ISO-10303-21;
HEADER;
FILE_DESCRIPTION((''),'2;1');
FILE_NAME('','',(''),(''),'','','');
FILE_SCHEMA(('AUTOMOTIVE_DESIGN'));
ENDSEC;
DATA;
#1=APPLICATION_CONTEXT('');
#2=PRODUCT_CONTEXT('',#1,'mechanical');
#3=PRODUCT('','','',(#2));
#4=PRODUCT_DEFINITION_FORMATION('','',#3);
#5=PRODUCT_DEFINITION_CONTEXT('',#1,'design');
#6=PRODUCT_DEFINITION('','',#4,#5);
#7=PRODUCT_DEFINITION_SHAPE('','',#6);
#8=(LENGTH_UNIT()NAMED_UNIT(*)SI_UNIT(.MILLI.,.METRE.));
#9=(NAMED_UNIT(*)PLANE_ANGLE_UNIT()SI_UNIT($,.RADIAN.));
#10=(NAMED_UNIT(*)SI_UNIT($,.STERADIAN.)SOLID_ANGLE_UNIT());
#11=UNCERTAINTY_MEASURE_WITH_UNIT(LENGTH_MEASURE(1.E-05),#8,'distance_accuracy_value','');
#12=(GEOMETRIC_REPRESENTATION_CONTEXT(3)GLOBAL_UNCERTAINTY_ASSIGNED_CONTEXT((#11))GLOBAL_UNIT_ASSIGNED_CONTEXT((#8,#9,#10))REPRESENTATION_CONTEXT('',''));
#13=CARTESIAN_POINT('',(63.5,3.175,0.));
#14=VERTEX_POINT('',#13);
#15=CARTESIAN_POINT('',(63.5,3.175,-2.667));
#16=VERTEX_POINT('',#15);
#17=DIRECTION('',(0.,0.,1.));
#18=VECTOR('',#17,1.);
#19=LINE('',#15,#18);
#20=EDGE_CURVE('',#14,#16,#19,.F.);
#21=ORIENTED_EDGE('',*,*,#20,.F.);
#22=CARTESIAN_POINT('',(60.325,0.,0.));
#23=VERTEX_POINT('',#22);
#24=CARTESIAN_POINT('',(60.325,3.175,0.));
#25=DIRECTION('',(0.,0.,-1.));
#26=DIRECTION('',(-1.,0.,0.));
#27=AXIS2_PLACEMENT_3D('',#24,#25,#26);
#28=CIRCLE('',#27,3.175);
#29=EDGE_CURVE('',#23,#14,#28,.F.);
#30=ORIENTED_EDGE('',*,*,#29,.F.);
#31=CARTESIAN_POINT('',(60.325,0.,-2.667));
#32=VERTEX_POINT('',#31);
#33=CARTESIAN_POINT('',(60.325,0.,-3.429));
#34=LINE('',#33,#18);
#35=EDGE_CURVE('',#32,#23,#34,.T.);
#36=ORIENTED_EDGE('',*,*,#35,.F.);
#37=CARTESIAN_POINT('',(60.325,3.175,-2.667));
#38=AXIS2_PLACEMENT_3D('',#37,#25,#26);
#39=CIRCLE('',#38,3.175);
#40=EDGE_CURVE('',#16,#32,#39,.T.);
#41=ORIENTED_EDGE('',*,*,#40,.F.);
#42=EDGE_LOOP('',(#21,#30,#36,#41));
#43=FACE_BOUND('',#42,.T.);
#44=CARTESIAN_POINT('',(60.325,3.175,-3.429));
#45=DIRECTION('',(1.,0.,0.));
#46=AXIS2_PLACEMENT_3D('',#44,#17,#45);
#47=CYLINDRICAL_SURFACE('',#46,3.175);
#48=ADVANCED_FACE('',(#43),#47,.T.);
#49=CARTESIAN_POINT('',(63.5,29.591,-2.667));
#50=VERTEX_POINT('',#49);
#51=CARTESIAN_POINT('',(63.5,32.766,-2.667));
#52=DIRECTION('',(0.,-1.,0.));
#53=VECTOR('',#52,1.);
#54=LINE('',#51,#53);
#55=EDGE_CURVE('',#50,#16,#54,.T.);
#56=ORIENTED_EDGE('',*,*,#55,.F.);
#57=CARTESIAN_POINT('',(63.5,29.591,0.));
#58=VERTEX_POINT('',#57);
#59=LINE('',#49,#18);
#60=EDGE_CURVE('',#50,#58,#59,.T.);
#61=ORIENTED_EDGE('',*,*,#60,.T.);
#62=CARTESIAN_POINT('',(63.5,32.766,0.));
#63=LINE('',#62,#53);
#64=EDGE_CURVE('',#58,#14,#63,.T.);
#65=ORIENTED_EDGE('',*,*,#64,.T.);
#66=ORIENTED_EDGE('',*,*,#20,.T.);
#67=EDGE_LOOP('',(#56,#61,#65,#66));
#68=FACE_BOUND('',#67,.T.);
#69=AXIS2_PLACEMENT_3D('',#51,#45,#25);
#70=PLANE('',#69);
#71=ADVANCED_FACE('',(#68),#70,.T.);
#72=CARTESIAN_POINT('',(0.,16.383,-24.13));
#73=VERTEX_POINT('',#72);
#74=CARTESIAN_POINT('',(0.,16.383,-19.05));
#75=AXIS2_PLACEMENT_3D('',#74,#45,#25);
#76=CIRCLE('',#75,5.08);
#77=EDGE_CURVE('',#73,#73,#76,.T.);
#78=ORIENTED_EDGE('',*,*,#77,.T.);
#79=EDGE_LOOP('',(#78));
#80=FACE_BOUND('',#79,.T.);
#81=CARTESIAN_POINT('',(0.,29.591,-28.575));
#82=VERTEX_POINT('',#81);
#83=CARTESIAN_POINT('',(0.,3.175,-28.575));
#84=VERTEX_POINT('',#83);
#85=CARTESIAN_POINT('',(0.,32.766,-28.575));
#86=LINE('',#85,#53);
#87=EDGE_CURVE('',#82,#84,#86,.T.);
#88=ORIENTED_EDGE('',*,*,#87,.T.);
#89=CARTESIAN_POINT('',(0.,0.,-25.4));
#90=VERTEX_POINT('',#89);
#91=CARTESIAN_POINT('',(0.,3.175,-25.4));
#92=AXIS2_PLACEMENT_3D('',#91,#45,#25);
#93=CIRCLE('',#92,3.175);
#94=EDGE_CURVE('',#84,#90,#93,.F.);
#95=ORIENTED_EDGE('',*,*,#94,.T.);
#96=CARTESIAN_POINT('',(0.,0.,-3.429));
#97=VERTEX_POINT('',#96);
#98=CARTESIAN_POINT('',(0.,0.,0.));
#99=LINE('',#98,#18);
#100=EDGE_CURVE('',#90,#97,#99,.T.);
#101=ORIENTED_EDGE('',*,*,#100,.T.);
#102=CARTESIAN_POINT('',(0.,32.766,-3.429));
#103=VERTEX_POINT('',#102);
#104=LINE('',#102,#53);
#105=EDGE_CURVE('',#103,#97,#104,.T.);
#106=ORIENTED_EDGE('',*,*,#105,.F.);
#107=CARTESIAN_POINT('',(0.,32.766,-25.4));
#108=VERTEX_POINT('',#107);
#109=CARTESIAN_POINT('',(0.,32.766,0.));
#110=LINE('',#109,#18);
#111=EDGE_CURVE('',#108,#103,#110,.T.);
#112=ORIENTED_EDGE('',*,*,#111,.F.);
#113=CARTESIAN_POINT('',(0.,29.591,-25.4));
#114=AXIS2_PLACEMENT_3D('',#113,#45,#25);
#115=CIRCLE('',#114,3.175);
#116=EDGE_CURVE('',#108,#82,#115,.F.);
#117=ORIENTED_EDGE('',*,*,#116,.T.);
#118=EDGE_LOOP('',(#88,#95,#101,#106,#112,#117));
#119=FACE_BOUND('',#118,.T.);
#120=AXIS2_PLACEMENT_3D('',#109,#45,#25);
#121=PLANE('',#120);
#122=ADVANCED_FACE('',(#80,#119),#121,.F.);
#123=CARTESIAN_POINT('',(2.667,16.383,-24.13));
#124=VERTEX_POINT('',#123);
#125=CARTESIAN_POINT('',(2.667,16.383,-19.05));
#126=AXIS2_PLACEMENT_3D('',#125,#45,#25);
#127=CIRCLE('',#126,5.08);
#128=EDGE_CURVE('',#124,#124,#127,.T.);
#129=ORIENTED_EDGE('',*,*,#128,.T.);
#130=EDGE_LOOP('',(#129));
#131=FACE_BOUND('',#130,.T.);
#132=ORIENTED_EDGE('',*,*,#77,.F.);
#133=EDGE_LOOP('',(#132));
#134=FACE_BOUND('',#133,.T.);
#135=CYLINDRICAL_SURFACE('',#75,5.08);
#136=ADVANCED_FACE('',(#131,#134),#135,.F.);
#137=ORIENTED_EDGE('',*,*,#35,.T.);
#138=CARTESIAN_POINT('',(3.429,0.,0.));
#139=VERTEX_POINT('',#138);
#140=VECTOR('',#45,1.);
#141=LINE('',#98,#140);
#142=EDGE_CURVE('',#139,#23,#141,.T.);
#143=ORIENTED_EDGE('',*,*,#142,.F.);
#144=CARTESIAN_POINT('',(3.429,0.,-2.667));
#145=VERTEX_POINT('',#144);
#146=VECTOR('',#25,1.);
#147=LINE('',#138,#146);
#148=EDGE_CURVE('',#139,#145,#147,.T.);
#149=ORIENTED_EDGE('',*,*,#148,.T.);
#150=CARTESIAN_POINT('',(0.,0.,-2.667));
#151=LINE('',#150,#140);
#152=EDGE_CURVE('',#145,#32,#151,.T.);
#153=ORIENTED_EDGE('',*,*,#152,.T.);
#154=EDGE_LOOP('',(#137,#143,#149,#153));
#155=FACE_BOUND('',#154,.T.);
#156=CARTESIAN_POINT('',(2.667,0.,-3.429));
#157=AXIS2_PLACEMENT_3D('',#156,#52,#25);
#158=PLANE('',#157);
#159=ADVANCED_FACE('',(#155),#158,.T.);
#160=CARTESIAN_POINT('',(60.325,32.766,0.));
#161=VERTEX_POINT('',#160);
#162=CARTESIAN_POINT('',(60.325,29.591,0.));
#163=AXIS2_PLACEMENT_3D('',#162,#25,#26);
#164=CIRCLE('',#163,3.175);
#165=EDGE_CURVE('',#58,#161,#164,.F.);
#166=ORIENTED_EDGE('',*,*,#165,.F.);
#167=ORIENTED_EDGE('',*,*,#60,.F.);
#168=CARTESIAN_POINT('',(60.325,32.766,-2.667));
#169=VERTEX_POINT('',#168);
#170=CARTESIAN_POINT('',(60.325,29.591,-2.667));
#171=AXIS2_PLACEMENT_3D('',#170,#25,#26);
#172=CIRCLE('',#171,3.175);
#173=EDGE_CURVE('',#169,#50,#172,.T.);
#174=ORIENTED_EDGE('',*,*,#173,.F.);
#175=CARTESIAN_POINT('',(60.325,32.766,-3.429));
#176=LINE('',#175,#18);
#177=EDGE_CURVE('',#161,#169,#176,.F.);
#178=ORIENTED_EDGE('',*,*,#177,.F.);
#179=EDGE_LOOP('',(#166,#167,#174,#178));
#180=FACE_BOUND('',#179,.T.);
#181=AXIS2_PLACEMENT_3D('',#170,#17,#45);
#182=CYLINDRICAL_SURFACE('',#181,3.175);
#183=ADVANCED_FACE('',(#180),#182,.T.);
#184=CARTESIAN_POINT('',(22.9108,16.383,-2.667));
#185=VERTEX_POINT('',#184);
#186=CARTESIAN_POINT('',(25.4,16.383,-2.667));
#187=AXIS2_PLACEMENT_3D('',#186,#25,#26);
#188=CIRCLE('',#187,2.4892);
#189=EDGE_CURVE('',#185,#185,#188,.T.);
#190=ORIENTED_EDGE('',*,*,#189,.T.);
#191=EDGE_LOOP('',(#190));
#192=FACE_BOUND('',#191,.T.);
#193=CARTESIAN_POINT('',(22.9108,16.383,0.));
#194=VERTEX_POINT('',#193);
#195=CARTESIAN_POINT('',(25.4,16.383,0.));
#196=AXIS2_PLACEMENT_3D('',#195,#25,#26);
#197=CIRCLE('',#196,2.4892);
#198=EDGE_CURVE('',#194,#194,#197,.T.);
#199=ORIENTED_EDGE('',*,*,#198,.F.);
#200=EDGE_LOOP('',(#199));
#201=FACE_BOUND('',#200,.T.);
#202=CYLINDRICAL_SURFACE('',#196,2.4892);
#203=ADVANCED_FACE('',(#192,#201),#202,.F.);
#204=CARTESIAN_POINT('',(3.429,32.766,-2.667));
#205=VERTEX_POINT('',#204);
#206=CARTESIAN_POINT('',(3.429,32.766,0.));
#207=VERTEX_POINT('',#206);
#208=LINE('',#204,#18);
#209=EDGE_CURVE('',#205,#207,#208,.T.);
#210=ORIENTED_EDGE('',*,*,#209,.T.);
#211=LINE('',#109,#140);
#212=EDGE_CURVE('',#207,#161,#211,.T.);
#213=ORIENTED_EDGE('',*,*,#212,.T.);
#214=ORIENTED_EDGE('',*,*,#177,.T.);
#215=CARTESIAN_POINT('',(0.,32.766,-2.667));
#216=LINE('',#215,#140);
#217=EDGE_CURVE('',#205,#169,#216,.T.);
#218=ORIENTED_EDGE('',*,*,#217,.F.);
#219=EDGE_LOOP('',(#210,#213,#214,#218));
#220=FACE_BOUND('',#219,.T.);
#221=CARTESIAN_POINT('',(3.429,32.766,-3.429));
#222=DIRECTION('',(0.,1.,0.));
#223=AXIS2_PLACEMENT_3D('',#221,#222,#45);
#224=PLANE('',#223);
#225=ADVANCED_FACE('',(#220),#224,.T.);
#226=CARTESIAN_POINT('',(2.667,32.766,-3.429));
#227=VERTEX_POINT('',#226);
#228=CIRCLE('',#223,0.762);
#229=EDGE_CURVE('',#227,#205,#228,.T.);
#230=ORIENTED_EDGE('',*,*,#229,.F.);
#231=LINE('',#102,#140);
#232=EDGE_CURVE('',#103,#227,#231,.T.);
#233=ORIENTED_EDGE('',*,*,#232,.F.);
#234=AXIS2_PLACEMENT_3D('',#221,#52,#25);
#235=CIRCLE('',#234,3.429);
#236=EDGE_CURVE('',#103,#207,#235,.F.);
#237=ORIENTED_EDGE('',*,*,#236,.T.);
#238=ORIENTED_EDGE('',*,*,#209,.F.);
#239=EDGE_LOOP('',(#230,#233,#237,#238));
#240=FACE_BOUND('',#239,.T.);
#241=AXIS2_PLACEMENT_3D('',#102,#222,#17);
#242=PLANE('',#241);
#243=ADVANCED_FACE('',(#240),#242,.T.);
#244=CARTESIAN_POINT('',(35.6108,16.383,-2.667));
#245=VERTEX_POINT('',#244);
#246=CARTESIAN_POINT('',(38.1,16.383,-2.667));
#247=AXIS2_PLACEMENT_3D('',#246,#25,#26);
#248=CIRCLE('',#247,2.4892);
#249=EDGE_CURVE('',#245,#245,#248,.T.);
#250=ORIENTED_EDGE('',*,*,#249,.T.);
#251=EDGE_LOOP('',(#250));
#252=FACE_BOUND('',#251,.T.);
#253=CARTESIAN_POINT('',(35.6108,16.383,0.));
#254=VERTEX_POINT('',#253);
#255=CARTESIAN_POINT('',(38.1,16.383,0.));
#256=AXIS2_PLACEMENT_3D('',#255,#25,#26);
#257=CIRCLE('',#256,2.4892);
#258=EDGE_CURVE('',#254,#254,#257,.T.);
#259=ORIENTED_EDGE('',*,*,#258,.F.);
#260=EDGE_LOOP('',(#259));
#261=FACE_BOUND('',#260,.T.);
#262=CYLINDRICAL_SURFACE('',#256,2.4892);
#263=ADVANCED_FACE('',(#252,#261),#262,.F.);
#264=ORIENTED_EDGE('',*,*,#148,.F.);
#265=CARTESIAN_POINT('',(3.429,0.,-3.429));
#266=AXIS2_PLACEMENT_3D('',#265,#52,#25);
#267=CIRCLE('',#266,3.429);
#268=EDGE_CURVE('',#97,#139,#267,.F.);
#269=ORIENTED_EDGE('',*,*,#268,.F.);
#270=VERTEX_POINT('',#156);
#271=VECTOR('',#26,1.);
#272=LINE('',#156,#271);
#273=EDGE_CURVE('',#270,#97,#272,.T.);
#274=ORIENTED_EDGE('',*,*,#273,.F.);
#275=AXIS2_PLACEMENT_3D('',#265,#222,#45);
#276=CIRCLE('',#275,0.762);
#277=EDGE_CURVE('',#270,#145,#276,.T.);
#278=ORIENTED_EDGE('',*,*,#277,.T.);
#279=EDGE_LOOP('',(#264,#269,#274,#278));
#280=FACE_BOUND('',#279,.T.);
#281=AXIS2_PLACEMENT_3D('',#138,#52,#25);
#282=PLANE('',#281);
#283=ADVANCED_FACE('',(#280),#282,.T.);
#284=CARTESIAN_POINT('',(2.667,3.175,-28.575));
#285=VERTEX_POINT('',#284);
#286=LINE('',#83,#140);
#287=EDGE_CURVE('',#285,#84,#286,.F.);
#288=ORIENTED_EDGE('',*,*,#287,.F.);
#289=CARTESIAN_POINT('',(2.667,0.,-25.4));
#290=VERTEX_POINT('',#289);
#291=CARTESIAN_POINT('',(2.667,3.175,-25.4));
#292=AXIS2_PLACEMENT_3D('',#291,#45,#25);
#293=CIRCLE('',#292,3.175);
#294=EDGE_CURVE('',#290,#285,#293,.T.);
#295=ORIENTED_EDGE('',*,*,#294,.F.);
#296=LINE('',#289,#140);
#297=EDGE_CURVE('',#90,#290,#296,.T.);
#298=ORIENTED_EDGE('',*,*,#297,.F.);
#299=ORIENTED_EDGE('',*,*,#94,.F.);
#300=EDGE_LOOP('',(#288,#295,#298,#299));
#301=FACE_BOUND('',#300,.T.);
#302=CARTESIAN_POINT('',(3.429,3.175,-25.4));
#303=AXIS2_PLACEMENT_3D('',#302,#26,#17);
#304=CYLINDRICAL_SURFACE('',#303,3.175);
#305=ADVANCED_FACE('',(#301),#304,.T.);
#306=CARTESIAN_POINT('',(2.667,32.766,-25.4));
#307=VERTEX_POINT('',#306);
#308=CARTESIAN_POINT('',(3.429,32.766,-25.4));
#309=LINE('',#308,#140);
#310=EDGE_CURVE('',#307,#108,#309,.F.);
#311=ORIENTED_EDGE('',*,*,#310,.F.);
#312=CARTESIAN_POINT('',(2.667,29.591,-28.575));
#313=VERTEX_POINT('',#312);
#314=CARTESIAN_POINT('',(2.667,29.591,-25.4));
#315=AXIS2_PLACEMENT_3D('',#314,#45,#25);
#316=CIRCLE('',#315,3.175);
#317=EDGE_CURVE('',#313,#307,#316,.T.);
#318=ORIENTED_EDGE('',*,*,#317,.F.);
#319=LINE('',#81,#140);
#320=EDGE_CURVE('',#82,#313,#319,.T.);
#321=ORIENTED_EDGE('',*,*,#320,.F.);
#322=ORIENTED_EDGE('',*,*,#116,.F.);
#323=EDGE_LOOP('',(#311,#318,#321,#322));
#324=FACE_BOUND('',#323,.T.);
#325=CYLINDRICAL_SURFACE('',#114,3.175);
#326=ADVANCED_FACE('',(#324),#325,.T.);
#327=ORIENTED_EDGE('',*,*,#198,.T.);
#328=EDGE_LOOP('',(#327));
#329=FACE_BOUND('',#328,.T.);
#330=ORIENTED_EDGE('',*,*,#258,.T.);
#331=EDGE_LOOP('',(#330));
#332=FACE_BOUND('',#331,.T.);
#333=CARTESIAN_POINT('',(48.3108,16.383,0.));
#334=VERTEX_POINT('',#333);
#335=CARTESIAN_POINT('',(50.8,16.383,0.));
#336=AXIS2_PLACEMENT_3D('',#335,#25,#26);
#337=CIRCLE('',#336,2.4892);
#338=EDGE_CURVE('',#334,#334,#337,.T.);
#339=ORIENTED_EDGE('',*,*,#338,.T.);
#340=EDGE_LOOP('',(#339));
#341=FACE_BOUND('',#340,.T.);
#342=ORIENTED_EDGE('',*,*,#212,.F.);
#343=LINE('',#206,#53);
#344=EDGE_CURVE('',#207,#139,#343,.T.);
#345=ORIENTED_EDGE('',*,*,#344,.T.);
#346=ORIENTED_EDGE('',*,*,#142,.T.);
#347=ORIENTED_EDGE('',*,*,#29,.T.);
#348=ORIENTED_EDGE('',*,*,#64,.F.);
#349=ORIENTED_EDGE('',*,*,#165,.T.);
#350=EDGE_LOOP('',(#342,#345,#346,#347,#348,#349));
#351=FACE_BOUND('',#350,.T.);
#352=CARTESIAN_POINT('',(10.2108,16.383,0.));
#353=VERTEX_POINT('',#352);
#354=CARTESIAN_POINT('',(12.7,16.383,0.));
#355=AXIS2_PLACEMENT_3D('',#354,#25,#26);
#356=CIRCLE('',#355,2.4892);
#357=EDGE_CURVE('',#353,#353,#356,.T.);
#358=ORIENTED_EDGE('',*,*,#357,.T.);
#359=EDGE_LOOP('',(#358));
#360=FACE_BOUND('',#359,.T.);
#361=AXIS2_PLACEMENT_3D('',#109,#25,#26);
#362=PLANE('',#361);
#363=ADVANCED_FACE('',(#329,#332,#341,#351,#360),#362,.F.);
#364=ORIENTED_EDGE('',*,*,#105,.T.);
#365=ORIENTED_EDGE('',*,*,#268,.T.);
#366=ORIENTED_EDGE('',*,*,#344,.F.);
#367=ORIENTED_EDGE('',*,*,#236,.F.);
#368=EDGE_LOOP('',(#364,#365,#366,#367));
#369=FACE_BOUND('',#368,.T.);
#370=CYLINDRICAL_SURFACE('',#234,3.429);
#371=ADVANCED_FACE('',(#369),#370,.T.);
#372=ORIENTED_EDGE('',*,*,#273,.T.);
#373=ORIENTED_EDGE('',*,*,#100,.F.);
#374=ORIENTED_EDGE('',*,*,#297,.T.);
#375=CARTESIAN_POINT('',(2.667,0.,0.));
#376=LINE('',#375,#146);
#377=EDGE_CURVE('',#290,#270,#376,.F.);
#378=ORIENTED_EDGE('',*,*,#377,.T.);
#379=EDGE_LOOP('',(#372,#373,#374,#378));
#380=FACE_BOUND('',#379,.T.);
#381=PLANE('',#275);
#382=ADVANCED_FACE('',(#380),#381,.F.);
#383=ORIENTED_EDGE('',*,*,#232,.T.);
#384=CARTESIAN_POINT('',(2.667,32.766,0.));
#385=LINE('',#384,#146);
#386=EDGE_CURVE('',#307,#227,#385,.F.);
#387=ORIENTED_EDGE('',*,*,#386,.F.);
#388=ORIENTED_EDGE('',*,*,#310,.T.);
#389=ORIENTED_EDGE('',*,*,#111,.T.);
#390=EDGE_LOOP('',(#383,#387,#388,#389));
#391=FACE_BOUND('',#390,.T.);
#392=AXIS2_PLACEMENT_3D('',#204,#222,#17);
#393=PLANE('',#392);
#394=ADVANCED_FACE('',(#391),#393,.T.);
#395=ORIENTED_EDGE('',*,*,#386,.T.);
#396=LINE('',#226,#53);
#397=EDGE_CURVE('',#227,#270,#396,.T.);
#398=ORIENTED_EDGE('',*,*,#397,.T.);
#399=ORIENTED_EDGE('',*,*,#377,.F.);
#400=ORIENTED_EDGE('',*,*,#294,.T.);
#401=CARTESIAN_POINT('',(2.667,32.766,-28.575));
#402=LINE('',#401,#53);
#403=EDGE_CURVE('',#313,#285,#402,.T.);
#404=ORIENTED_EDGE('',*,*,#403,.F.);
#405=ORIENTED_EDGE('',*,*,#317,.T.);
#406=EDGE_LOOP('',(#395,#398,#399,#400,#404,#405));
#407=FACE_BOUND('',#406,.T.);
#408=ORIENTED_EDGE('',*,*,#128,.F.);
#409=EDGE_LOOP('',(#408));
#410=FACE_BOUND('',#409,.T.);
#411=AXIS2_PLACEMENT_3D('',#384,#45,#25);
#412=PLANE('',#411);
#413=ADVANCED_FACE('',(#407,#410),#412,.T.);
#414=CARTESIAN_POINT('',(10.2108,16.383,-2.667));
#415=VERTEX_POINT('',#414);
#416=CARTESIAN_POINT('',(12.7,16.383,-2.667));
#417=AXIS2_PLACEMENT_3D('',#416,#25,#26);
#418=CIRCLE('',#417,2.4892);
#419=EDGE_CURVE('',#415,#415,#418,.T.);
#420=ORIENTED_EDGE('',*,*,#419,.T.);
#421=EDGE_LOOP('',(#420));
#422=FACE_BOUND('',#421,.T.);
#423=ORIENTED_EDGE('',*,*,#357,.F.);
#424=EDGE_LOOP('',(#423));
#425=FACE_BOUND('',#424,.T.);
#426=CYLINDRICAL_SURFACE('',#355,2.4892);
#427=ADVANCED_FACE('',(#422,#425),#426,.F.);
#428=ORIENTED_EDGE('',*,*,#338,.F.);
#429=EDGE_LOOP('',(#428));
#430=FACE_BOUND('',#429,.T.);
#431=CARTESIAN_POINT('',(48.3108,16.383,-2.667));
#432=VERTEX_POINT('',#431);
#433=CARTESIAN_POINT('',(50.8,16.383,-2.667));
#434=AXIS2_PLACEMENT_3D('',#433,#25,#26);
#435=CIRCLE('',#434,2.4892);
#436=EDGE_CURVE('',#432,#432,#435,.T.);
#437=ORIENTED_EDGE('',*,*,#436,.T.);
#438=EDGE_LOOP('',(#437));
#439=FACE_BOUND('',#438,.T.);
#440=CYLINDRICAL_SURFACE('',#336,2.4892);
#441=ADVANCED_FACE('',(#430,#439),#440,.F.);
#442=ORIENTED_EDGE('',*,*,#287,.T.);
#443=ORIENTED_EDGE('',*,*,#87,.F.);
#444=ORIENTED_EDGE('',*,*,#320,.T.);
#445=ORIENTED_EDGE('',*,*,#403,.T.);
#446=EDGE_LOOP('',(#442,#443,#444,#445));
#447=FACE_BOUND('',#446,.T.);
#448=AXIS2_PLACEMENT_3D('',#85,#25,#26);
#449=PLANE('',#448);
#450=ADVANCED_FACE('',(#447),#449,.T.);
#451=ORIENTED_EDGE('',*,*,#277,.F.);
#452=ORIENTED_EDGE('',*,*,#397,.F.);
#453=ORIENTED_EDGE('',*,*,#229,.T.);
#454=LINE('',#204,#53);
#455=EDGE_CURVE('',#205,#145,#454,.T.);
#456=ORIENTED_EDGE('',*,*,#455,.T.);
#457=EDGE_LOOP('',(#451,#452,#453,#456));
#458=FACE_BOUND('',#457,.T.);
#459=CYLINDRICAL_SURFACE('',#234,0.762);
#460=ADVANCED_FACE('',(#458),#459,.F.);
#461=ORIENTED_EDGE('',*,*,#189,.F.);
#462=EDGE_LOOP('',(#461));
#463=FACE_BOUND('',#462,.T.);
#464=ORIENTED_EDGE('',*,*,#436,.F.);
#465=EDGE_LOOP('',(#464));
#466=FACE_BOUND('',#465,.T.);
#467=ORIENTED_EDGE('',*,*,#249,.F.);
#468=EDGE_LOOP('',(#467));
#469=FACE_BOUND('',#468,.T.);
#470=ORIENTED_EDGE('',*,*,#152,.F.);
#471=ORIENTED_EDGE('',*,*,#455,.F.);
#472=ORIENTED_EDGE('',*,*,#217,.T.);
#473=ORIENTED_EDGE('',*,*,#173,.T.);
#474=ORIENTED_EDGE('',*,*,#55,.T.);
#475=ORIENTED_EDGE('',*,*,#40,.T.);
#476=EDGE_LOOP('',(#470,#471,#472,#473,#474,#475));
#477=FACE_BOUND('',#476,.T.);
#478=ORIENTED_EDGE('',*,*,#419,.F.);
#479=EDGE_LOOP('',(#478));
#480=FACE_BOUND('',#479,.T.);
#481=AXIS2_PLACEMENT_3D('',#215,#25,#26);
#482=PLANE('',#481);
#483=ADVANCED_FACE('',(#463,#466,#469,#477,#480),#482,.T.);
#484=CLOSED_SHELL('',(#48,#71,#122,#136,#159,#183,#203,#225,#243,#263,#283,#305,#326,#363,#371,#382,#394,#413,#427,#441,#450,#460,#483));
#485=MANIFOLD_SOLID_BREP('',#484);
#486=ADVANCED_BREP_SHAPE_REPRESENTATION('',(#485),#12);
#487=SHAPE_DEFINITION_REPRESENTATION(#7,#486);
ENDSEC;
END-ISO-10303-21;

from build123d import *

# Parameters (mm, degrees)
BASE_FLANGE1_DEPTH = 32.766
SKETCH6_R          = 2.4892
CUT_EXTRUDE1_DEPTH = 77.00713927
SKETCH7_R          = 5.08
CUT_EXTRUDE2_DEPTH = 75.771620753
FILLET1_R          = 3.175


# Read off the part's stored shape, not the designer's step: Base-Flange1
with BuildPart() as part:
    # Base-Flange1 outline → Base-Flange1 (new body)
    with BuildSketch(Plane(origin=(0, 0, 0), x_dir=(1, 0, 0), z_dir=(0, 1, 0))):
        with BuildLine():
            Line((3.429, 0), (63.5, 0))
            Line((63.5, 0), (63.5, 2.667))
            Line((63.5, 2.667), (3.429, 2.667))
            ThreePointArc((3.429, 2.667), (2.890184633, 2.890184633), (2.667, 3.429))
            Line((2.667, 3.429), (2.667, 28.575))
            Line((2.667, 28.575), (0, 28.575))
            Line((0, 28.575), (0, 3.429))
            ThreePointArc((0, 3.429), (1.004330847, 1.004330847), (3.429, 0))
        make_face()
    extrude(amount=BASE_FLANGE1_DEPTH)

    # Sketch6 → Cut-Extrude1 (cut, through all)
    with BuildSketch(Plane(origin=(0, 0, -2.667), x_dir=(-1, 0, 0), z_dir=(0, 0, -1))):
        with Locations((-50.8, 16.383)):
            Circle(SKETCH6_R)
        with Locations((-38.1, 16.383)):
            Circle(SKETCH6_R)
        with Locations((-25.4, 16.383)):
            Circle(SKETCH6_R)
        with Locations((-12.7, 16.383)):
            Circle(SKETCH6_R)
    extrude(amount=-CUT_EXTRUDE1_DEPTH, mode=Mode.SUBTRACT)

    # Sketch7 → Cut-Extrude2 (cut, through all)
    with BuildSketch(Plane(origin=(2.667, 0, 0), x_dir=(0, 0, -1), z_dir=(1, 0, 0))):
        with Locations((19.05, 16.383)):
            Circle(SKETCH7_R)
    extrude(amount=-CUT_EXTRUDE2_DEPTH, mode=Mode.SUBTRACT)

    # Fillet1
    fillet1_edges = [part.edges().sort_by_distance(p)[0] for p in [
        (1.3335, 32.766, -28.575),
        (1.3335, 0, -28.575),
        (63.5, 32.766, -1.3335),
        (63.5, 0, -1.3335),
    ]]
    fillet(fillet1_edges, radius=FILLET1_R)


solid = part.part
